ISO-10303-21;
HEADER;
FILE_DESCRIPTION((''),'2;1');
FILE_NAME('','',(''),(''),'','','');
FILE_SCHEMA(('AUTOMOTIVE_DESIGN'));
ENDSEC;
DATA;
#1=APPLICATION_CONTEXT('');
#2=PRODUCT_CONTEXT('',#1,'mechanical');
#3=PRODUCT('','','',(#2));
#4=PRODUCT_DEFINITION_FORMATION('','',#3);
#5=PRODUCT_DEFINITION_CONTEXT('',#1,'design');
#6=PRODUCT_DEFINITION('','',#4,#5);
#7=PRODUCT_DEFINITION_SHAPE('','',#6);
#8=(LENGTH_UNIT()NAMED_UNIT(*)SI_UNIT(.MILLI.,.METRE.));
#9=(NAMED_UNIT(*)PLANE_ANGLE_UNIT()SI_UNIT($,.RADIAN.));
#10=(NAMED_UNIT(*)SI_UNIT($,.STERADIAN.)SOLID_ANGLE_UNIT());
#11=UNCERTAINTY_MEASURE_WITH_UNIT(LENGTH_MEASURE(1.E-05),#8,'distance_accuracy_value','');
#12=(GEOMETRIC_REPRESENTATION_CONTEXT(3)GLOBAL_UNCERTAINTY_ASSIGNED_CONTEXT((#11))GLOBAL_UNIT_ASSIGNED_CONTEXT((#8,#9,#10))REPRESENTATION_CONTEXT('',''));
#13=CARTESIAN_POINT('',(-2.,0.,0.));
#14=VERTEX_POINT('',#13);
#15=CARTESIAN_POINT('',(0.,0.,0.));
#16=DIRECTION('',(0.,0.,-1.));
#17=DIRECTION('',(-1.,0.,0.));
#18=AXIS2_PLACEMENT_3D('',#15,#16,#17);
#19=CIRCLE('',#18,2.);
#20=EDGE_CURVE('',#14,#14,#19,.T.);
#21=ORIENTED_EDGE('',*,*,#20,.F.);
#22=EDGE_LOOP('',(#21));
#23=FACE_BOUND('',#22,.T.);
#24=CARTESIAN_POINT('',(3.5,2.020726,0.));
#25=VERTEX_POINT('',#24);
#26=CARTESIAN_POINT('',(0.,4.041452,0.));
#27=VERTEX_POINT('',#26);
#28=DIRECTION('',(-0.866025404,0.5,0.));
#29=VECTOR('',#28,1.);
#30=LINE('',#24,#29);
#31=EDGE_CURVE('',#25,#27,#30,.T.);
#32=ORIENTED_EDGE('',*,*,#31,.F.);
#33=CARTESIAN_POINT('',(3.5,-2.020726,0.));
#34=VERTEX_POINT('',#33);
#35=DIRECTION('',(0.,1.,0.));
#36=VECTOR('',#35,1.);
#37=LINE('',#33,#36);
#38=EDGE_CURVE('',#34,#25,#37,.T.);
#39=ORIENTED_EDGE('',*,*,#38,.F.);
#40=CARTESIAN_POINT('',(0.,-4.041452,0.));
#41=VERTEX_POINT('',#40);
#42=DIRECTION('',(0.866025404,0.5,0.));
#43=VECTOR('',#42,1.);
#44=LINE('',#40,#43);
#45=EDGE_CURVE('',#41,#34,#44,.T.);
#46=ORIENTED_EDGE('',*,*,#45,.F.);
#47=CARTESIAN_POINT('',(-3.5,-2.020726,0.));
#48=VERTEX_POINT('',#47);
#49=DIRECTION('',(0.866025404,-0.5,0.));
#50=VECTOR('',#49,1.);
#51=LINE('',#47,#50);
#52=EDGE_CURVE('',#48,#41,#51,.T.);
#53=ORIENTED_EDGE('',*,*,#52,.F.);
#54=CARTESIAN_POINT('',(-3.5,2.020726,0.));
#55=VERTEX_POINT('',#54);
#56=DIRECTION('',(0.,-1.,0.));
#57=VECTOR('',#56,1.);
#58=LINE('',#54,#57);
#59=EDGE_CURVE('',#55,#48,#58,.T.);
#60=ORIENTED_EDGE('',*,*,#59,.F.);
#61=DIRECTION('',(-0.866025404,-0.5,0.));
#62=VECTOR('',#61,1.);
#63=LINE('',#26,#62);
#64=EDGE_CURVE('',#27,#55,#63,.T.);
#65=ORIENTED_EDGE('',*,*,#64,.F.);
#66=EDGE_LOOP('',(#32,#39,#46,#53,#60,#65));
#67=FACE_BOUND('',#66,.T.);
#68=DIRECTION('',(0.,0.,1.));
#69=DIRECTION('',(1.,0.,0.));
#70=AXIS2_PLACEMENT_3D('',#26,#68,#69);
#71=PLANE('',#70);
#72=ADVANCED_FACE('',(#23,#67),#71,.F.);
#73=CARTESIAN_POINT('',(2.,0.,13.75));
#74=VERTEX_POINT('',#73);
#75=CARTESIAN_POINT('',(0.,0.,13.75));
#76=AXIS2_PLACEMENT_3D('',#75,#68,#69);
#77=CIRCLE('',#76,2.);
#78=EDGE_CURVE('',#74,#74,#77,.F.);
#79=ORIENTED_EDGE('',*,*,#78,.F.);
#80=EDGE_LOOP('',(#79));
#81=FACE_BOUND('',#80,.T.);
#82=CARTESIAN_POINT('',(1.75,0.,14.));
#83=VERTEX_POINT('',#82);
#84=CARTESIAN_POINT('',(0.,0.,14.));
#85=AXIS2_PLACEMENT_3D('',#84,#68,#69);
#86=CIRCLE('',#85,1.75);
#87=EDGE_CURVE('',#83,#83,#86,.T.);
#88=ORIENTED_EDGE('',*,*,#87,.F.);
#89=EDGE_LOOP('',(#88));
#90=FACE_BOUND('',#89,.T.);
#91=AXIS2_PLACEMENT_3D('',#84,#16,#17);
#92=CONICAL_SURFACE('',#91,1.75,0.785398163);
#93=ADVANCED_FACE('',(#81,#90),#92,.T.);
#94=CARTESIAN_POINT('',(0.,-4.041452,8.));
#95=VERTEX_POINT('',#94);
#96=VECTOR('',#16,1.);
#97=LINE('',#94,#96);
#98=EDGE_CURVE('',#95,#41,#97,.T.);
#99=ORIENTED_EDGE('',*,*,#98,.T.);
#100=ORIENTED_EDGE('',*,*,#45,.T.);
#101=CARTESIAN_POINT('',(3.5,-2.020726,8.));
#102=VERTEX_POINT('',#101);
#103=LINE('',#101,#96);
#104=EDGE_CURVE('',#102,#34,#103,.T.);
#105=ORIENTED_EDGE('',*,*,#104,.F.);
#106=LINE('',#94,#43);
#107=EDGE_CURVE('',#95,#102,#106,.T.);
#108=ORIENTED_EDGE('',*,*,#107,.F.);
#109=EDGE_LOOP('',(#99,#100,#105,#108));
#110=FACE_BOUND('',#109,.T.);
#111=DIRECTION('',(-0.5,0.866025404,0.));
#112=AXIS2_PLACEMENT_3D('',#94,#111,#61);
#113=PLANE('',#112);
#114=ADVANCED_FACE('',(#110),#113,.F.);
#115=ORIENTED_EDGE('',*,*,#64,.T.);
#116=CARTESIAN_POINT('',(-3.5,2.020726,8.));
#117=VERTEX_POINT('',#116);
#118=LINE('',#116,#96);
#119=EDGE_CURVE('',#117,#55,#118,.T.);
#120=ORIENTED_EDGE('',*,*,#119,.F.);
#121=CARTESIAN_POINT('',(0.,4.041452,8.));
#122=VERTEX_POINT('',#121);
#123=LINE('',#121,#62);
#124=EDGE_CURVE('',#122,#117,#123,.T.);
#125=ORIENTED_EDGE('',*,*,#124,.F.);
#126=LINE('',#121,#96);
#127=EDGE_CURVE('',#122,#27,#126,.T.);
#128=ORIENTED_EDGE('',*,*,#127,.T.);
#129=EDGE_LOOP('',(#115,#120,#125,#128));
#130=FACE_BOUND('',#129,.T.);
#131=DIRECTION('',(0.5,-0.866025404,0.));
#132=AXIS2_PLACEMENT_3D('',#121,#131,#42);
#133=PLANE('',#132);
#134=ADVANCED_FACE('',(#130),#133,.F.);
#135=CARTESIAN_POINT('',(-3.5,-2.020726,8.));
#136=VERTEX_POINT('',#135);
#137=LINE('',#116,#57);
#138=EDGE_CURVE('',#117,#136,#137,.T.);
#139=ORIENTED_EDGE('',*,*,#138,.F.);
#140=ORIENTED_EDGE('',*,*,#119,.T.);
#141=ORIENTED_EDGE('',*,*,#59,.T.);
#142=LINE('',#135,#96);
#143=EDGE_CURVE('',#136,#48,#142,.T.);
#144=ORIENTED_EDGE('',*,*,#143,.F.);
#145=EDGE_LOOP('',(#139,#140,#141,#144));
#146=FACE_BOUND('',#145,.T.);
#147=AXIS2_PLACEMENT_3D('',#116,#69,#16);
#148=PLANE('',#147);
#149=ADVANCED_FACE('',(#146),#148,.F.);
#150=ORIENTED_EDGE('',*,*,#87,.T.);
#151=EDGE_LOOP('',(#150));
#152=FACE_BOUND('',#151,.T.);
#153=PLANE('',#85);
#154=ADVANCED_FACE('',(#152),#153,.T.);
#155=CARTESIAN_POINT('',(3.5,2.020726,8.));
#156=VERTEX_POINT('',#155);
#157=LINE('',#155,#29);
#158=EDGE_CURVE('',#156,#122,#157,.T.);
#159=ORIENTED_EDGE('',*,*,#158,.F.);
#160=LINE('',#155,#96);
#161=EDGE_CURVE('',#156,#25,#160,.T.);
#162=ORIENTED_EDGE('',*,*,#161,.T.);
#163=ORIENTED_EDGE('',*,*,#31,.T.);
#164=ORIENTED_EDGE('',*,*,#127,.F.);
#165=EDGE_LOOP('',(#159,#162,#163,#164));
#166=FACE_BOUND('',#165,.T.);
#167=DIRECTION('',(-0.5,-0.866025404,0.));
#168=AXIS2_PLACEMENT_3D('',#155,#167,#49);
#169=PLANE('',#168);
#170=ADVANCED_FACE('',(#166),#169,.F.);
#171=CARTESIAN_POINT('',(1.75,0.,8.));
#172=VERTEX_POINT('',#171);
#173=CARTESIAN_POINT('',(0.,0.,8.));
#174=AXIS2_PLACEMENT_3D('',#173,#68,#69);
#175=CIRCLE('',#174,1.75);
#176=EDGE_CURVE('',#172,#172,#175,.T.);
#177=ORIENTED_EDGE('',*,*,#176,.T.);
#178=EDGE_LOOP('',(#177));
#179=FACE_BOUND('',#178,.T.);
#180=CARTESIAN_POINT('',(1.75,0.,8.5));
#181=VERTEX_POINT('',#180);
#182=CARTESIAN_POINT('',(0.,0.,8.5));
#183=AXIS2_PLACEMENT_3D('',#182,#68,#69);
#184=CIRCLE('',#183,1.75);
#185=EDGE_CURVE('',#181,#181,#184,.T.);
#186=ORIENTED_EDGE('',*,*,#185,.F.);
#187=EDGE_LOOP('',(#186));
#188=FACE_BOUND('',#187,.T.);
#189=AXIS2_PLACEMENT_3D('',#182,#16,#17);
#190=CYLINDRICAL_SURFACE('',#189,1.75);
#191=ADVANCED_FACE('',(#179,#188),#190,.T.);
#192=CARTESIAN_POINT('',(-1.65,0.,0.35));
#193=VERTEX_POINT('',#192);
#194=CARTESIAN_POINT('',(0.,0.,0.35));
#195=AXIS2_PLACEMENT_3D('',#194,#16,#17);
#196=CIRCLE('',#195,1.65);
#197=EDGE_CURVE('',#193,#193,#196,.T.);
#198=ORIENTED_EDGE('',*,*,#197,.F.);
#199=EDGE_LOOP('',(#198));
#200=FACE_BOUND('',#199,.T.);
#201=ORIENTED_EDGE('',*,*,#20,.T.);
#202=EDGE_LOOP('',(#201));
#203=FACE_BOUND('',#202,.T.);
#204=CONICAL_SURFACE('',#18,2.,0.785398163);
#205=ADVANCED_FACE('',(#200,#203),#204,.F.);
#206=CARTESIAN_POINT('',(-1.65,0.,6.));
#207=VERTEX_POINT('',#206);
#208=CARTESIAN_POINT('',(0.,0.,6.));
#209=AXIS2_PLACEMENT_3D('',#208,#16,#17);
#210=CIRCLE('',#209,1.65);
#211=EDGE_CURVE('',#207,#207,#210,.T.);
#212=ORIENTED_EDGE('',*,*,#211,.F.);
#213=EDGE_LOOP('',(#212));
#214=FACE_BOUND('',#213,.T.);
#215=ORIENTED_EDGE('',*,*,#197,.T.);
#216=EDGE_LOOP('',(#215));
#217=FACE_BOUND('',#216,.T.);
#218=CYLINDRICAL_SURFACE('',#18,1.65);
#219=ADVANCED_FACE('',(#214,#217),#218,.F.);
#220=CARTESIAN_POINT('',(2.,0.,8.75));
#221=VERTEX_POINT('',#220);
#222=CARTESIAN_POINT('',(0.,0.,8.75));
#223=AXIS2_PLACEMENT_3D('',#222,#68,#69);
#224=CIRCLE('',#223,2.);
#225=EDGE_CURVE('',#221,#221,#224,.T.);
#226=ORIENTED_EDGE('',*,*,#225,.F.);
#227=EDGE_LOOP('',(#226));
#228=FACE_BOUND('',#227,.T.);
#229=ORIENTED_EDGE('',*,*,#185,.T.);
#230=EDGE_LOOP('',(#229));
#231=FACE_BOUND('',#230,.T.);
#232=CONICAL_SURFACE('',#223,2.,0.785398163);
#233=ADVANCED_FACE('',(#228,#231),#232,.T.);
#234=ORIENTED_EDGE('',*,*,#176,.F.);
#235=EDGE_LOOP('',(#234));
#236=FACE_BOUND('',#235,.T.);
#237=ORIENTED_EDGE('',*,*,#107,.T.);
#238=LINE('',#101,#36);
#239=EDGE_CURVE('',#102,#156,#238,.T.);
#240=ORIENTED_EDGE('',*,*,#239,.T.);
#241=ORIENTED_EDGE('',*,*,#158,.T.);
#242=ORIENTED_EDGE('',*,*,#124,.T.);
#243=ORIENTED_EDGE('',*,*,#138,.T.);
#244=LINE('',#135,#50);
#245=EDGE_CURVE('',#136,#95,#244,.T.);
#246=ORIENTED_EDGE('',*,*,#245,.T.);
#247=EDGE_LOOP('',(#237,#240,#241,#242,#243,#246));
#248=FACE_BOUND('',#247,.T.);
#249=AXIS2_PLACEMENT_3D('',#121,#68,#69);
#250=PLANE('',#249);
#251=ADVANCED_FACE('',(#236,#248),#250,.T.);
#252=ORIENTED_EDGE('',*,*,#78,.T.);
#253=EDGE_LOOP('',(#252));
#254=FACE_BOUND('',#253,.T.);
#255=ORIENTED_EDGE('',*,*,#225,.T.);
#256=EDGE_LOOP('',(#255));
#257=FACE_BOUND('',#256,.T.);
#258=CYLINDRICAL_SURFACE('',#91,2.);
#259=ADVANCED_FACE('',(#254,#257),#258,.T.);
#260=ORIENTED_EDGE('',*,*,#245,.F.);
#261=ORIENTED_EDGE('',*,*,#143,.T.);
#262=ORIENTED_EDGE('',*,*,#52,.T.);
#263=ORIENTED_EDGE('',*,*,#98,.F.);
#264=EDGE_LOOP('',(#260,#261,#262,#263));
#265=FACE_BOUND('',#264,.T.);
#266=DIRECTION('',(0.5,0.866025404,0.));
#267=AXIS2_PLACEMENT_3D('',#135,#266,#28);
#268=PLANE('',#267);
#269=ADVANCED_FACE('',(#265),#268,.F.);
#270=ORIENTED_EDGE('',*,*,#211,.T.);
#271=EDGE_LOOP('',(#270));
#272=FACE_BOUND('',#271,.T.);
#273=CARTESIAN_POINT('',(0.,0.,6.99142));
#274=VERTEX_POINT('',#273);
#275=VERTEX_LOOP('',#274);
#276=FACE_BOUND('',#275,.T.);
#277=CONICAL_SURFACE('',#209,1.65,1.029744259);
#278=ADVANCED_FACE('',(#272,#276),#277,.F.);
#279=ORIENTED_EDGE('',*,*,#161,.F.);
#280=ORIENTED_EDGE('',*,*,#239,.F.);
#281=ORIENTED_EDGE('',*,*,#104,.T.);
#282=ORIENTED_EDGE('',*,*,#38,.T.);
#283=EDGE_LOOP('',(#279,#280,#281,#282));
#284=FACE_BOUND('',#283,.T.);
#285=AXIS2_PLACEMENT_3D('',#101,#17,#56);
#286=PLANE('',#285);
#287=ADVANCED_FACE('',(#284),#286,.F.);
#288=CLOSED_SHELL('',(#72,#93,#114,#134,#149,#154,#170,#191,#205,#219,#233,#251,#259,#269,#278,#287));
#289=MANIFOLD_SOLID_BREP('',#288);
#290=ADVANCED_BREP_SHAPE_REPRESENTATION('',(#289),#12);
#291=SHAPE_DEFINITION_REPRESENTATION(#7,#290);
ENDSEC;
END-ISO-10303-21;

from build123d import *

# Parameters (mm, degrees)
EXTRUDE_1_DEPTH             = 8
SKETCH_2_R                  = 2
EXTRUDE_2_DEPTH             = 6
SKETCH_3_R                  = 2
SKETCH_3_R_2                = 1.75
CUT_EXTRUDE_3_DEPTH         = 0.5
CHAMFER_1_SIZE              = 0.25
HOLE_WIZARD_M41_D           = 3.3
HOLE_WIZARD_M41_DEPTH       = 6
HOLE_WIZARD_M41_CSINK_D     = 4
HOLE_WIZARD_M41_CSINK_ANGLE = 90
HOLE_WIZARD_M41_TIP         = 0.991420021


with BuildPart() as part:
    # Эскиз1 → Вытянуть1 (new body)
    with BuildSketch(Plane.XY):
        Polygon((0, 4.041451884), (-3.5, 2.020725942), (-3.5, -2.020725942), (0, -4.041451884), (3.5, -2.020725942), (3.5, 2.020725942), align=None)
    extrude(amount=EXTRUDE_1_DEPTH)

    # Эскиз2 → Вытянуть2 (add)
    with BuildSketch(Plane.XY.offset(8)):
        Circle(SKETCH_2_R)
    extrude(amount=EXTRUDE_2_DEPTH)

    # Эскиз3 → Вырез-Вытянуть3 (cut)
    with BuildSketch(Plane.XY.offset(8)):
        Circle(SKETCH_3_R)
        Circle(SKETCH_3_R_2, mode=Mode.SUBTRACT)
    extrude(amount=CUT_EXTRUDE_3_DEPTH, mode=Mode.SUBTRACT)

    # Фаска1
    chamfer_1_edges = [part.edges().sort_by_distance(p)[0] for p in [
        (-2, 0, 14),
        (-2, 0, 8.5),
    ]]
    chamfer(chamfer_1_edges, length=CHAMFER_1_SIZE - 0.0001)  # a hair under: the kernel refuses the full size

    # Отверстие с зазором M41
    with Locations(Plane(origin=(0, 0, 0), x_dir=(-1, 0, 0), z_dir=(0, 0, -1))):
        with Locations((0, 0)):
            CounterSinkHole(HOLE_WIZARD_M41_D / 2, HOLE_WIZARD_M41_CSINK_D / 2, depth=HOLE_WIZARD_M41_DEPTH, counter_sink_angle=HOLE_WIZARD_M41_CSINK_ANGLE)
            with Locations((0, 0, -(HOLE_WIZARD_M41_DEPTH + HOLE_WIZARD_M41_TIP / 2))):  # 118° drill point
                Cone(0, HOLE_WIZARD_M41_D / 2, HOLE_WIZARD_M41_TIP, mode=Mode.SUBTRACT)


solid = part.part
